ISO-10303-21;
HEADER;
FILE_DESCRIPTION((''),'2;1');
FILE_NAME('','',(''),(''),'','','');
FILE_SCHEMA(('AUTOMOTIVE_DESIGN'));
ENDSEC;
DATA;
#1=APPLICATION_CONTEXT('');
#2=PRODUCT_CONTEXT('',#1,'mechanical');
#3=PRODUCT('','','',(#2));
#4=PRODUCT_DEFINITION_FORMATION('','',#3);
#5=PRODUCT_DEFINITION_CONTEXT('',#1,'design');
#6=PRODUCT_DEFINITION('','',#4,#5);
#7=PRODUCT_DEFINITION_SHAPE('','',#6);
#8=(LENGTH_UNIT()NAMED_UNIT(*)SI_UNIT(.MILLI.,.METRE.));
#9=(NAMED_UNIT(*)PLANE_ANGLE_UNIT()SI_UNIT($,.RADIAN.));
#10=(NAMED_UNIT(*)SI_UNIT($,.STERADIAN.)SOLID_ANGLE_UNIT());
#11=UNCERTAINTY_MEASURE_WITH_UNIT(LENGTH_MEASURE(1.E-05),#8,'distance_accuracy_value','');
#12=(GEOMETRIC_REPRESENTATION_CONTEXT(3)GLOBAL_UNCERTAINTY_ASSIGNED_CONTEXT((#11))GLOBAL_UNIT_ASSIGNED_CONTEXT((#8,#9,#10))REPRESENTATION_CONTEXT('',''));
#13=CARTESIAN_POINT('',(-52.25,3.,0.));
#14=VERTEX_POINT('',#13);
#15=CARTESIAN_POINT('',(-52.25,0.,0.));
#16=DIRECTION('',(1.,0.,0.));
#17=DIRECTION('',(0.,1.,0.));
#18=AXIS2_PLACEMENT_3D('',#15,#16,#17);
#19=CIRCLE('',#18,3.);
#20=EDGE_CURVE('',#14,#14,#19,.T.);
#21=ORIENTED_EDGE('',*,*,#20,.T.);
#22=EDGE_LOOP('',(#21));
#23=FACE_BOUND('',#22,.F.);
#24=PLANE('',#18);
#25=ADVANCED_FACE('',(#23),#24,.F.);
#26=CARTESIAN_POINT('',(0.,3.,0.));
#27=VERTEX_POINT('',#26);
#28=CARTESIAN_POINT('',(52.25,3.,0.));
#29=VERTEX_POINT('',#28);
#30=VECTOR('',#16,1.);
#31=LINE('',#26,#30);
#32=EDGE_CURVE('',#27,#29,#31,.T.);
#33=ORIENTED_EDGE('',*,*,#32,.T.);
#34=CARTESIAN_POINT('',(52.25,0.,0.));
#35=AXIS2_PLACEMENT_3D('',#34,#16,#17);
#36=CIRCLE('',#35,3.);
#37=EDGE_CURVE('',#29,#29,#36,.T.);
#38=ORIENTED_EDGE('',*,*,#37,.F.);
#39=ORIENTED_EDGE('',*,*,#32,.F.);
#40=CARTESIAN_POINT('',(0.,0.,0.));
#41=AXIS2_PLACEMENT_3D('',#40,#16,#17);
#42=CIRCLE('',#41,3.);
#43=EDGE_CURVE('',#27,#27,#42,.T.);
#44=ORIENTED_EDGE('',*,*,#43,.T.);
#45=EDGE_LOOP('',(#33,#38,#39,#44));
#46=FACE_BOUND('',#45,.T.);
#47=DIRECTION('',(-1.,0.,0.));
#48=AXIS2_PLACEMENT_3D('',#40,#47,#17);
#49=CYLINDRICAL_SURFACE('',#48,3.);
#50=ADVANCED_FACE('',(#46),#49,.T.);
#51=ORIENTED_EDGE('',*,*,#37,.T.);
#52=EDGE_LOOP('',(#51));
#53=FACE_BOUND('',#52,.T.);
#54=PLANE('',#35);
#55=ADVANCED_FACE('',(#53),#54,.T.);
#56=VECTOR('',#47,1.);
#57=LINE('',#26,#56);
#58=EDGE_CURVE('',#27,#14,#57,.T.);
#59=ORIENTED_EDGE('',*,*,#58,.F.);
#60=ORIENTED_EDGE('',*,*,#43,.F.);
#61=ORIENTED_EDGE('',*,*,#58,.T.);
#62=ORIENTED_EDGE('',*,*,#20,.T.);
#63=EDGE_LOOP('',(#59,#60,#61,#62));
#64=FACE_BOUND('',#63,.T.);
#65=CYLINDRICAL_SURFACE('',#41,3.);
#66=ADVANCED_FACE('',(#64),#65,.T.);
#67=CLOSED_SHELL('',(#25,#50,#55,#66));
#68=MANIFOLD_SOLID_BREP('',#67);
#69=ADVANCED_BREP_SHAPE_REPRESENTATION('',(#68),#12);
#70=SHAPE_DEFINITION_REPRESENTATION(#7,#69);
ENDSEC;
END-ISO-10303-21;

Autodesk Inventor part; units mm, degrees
ref_plane "YZ Plane" through (0, 0, 0) normal (1, 0, 0) x (0, 1, 0)
ref_plane "XZ Plane" through (0, 0, 0) normal (0, 1, 0) x (-1, 0, 0)
ref_plane "XY Plane" through (0, 0, 0) normal (0, 0, 1) x (1, 0, 0)
sketch "Skizze1" plane through (0, 0, 0) normal (1, 0, 0) x (0, 1, 0)
  circle A0 centre (0, 0) radius 3
  dimension "d0" = 6
extrude "Extrusion1" add sketch "Skizze1" along normal mid plane 104.5
thread "Gewinde1" size "M6x1" class "6g" standard "ISO Metric profile" length 13
thread "Gewinde2" size "M6x1" class "6g" standard "ANSI Metric M Profile" length 16
properties part number "sf_Piston_Rod_1"
